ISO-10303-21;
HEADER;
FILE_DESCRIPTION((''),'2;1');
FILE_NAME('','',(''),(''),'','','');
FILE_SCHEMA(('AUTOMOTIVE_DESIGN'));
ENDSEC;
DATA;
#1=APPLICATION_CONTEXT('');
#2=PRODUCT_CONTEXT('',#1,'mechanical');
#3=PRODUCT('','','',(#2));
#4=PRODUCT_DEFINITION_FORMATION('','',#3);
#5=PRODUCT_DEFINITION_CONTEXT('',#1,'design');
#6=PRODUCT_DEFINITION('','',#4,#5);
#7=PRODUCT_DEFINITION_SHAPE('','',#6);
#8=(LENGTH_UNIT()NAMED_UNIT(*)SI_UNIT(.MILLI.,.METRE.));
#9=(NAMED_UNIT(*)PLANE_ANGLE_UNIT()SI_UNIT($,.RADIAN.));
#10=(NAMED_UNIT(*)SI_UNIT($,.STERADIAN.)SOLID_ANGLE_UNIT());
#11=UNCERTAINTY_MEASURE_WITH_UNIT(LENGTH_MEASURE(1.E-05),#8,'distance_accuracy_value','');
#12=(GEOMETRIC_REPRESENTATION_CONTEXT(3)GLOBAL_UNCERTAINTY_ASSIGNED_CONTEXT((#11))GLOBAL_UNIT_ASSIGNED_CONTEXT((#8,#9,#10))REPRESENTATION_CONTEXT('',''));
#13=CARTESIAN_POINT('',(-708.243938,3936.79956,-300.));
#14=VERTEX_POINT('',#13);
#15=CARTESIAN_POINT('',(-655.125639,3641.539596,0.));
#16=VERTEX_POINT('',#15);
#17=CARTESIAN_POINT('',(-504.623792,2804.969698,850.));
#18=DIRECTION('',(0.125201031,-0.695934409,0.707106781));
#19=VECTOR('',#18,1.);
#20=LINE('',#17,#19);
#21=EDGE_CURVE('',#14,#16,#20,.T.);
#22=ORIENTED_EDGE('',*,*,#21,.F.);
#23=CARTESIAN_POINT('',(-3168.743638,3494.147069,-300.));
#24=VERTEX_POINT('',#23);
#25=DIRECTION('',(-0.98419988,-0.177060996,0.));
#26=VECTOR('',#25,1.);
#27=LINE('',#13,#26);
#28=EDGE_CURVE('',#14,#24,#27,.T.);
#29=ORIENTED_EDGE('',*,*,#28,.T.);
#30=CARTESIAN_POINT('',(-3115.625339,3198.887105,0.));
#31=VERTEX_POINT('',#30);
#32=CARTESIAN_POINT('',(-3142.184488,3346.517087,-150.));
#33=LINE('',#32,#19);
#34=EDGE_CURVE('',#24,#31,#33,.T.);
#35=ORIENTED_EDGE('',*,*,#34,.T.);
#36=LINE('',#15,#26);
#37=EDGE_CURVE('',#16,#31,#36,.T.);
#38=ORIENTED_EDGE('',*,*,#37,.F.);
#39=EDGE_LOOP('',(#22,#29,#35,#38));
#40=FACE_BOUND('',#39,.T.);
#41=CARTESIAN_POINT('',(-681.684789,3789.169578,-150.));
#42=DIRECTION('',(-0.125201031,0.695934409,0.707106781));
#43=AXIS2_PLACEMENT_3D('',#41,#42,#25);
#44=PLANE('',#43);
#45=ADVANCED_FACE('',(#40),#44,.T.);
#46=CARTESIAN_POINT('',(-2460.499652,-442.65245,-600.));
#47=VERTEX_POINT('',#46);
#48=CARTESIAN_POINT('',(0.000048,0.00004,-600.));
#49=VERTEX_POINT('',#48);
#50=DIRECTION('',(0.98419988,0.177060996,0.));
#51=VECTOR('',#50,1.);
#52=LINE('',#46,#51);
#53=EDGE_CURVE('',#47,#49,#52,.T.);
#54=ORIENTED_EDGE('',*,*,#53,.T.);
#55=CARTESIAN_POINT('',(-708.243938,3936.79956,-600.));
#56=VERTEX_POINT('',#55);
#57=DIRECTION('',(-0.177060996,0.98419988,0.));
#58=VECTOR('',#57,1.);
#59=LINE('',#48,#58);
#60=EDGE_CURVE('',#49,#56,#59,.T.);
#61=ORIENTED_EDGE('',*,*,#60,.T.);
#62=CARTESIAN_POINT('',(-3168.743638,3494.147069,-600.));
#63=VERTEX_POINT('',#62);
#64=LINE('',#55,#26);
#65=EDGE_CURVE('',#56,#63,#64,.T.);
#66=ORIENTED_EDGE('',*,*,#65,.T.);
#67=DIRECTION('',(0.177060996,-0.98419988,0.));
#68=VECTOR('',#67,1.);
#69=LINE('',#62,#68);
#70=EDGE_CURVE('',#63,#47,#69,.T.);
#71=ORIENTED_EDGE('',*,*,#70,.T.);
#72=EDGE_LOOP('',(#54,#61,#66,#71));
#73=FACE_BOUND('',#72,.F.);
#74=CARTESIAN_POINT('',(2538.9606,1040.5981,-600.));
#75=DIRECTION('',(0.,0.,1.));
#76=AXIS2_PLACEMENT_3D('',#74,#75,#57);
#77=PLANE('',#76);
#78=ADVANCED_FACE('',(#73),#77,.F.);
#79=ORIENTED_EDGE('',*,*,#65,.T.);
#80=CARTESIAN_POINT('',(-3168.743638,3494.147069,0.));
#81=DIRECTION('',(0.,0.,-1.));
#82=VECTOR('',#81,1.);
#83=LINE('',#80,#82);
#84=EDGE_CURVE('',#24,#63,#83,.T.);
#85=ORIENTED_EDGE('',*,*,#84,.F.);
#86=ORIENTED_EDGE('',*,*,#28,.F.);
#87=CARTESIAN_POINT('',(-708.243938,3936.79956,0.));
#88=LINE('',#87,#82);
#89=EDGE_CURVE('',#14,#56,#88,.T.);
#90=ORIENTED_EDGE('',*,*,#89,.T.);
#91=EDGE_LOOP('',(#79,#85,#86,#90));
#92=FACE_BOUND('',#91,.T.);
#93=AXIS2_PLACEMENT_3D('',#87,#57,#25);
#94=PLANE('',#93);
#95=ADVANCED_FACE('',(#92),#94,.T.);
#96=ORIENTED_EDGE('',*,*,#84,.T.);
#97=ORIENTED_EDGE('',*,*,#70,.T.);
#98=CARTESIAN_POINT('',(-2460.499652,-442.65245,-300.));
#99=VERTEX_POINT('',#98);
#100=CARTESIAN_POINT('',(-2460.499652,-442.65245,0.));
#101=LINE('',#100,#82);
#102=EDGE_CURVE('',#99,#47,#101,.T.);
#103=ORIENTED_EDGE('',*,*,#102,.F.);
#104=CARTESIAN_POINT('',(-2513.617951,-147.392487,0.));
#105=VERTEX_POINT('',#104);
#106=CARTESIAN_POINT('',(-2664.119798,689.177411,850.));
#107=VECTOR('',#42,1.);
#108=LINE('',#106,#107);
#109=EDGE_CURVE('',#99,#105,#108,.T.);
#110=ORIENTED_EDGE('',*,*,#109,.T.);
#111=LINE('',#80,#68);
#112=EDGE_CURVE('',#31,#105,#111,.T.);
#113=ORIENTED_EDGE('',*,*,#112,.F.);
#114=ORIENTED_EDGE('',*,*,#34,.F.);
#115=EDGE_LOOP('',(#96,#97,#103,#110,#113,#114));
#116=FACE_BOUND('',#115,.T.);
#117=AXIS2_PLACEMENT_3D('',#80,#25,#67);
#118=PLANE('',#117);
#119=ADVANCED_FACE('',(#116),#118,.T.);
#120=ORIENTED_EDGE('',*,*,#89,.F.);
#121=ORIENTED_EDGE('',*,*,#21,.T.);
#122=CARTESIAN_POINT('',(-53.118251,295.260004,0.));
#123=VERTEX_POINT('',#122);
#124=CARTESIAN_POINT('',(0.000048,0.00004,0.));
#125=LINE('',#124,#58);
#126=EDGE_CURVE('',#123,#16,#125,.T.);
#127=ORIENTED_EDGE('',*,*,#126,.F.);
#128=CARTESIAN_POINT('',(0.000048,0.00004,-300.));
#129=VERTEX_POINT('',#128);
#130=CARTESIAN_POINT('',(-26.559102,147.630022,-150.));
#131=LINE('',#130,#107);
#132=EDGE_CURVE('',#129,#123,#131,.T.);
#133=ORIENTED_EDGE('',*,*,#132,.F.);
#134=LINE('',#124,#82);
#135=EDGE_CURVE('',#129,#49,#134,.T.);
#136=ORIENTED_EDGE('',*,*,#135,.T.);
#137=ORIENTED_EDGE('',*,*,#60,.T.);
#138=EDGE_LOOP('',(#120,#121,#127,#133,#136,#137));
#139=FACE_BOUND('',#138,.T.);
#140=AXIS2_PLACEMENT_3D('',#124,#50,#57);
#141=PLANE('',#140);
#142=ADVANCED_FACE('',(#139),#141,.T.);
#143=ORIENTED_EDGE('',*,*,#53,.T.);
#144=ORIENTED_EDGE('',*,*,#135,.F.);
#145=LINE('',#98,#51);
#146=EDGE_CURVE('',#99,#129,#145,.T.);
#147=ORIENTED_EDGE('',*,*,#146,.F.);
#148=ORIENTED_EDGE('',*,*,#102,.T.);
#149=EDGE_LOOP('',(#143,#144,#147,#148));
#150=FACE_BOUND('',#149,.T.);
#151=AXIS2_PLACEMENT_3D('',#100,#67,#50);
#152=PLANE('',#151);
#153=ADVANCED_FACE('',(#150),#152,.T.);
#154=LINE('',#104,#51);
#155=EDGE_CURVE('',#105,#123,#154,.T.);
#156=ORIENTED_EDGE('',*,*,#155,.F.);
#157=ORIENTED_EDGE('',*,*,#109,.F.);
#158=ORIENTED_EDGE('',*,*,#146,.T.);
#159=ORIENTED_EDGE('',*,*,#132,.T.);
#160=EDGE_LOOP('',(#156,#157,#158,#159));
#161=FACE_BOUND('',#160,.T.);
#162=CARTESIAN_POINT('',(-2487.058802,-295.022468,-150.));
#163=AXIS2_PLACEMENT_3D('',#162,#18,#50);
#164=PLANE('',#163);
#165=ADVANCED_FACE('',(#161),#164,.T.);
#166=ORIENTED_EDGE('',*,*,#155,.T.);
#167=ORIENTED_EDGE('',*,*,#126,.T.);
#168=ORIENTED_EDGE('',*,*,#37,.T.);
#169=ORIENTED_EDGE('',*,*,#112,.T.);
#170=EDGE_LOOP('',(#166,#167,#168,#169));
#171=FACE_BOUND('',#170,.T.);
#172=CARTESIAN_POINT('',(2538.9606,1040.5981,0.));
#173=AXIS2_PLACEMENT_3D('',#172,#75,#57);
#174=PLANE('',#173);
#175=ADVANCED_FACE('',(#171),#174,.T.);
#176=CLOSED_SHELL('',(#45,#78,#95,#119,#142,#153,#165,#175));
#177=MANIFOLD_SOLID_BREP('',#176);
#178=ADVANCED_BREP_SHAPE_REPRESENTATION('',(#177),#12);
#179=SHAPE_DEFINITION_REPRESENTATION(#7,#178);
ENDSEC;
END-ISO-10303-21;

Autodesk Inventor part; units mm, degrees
ref_plane "YZ Plane" through (0, 0, 0) normal (1, 0, 0) x (0, 1, 0)
ref_plane "XZ Plane" through (0, 0, 0) normal (0, 1, 0) x (-1, 0, 0)
ref_plane "Pracovní rovina1" through (2538.9606, 1040.5981, 0) normal (0, 0, 1) x (-0.177061, 0.9841999, 0)
sketch "Náčrt1" plane through (2538.9606, 1040.5981, 0) normal (0, 0, 1) x (-0.177061, 0.9841999, 0)
  line L0 (3425.3944, 5183.094) -> (-574.6056, 5183.094)
  line L1 (-574.6056, 5183.094) -> (-574.6056, 2683.094)
  line L2 (-574.6056, 2683.094) -> (3425.3944, 2683.094)
  line L3 (3425.3944, 2683.094) -> (3425.3944, 5183.094)
  dimension "d5" = 4000
  dimension "d6" = 2500
extrude "Vysunutí1" add sketch "Náčrt1" against normal blind 600
chamfer "Zkosení1" distance 300 angle 45 2 edges at (-1230.2498, -221.3263, 0) (-1938.4939, 3715.4732, 0)
properties part number "vozik"
